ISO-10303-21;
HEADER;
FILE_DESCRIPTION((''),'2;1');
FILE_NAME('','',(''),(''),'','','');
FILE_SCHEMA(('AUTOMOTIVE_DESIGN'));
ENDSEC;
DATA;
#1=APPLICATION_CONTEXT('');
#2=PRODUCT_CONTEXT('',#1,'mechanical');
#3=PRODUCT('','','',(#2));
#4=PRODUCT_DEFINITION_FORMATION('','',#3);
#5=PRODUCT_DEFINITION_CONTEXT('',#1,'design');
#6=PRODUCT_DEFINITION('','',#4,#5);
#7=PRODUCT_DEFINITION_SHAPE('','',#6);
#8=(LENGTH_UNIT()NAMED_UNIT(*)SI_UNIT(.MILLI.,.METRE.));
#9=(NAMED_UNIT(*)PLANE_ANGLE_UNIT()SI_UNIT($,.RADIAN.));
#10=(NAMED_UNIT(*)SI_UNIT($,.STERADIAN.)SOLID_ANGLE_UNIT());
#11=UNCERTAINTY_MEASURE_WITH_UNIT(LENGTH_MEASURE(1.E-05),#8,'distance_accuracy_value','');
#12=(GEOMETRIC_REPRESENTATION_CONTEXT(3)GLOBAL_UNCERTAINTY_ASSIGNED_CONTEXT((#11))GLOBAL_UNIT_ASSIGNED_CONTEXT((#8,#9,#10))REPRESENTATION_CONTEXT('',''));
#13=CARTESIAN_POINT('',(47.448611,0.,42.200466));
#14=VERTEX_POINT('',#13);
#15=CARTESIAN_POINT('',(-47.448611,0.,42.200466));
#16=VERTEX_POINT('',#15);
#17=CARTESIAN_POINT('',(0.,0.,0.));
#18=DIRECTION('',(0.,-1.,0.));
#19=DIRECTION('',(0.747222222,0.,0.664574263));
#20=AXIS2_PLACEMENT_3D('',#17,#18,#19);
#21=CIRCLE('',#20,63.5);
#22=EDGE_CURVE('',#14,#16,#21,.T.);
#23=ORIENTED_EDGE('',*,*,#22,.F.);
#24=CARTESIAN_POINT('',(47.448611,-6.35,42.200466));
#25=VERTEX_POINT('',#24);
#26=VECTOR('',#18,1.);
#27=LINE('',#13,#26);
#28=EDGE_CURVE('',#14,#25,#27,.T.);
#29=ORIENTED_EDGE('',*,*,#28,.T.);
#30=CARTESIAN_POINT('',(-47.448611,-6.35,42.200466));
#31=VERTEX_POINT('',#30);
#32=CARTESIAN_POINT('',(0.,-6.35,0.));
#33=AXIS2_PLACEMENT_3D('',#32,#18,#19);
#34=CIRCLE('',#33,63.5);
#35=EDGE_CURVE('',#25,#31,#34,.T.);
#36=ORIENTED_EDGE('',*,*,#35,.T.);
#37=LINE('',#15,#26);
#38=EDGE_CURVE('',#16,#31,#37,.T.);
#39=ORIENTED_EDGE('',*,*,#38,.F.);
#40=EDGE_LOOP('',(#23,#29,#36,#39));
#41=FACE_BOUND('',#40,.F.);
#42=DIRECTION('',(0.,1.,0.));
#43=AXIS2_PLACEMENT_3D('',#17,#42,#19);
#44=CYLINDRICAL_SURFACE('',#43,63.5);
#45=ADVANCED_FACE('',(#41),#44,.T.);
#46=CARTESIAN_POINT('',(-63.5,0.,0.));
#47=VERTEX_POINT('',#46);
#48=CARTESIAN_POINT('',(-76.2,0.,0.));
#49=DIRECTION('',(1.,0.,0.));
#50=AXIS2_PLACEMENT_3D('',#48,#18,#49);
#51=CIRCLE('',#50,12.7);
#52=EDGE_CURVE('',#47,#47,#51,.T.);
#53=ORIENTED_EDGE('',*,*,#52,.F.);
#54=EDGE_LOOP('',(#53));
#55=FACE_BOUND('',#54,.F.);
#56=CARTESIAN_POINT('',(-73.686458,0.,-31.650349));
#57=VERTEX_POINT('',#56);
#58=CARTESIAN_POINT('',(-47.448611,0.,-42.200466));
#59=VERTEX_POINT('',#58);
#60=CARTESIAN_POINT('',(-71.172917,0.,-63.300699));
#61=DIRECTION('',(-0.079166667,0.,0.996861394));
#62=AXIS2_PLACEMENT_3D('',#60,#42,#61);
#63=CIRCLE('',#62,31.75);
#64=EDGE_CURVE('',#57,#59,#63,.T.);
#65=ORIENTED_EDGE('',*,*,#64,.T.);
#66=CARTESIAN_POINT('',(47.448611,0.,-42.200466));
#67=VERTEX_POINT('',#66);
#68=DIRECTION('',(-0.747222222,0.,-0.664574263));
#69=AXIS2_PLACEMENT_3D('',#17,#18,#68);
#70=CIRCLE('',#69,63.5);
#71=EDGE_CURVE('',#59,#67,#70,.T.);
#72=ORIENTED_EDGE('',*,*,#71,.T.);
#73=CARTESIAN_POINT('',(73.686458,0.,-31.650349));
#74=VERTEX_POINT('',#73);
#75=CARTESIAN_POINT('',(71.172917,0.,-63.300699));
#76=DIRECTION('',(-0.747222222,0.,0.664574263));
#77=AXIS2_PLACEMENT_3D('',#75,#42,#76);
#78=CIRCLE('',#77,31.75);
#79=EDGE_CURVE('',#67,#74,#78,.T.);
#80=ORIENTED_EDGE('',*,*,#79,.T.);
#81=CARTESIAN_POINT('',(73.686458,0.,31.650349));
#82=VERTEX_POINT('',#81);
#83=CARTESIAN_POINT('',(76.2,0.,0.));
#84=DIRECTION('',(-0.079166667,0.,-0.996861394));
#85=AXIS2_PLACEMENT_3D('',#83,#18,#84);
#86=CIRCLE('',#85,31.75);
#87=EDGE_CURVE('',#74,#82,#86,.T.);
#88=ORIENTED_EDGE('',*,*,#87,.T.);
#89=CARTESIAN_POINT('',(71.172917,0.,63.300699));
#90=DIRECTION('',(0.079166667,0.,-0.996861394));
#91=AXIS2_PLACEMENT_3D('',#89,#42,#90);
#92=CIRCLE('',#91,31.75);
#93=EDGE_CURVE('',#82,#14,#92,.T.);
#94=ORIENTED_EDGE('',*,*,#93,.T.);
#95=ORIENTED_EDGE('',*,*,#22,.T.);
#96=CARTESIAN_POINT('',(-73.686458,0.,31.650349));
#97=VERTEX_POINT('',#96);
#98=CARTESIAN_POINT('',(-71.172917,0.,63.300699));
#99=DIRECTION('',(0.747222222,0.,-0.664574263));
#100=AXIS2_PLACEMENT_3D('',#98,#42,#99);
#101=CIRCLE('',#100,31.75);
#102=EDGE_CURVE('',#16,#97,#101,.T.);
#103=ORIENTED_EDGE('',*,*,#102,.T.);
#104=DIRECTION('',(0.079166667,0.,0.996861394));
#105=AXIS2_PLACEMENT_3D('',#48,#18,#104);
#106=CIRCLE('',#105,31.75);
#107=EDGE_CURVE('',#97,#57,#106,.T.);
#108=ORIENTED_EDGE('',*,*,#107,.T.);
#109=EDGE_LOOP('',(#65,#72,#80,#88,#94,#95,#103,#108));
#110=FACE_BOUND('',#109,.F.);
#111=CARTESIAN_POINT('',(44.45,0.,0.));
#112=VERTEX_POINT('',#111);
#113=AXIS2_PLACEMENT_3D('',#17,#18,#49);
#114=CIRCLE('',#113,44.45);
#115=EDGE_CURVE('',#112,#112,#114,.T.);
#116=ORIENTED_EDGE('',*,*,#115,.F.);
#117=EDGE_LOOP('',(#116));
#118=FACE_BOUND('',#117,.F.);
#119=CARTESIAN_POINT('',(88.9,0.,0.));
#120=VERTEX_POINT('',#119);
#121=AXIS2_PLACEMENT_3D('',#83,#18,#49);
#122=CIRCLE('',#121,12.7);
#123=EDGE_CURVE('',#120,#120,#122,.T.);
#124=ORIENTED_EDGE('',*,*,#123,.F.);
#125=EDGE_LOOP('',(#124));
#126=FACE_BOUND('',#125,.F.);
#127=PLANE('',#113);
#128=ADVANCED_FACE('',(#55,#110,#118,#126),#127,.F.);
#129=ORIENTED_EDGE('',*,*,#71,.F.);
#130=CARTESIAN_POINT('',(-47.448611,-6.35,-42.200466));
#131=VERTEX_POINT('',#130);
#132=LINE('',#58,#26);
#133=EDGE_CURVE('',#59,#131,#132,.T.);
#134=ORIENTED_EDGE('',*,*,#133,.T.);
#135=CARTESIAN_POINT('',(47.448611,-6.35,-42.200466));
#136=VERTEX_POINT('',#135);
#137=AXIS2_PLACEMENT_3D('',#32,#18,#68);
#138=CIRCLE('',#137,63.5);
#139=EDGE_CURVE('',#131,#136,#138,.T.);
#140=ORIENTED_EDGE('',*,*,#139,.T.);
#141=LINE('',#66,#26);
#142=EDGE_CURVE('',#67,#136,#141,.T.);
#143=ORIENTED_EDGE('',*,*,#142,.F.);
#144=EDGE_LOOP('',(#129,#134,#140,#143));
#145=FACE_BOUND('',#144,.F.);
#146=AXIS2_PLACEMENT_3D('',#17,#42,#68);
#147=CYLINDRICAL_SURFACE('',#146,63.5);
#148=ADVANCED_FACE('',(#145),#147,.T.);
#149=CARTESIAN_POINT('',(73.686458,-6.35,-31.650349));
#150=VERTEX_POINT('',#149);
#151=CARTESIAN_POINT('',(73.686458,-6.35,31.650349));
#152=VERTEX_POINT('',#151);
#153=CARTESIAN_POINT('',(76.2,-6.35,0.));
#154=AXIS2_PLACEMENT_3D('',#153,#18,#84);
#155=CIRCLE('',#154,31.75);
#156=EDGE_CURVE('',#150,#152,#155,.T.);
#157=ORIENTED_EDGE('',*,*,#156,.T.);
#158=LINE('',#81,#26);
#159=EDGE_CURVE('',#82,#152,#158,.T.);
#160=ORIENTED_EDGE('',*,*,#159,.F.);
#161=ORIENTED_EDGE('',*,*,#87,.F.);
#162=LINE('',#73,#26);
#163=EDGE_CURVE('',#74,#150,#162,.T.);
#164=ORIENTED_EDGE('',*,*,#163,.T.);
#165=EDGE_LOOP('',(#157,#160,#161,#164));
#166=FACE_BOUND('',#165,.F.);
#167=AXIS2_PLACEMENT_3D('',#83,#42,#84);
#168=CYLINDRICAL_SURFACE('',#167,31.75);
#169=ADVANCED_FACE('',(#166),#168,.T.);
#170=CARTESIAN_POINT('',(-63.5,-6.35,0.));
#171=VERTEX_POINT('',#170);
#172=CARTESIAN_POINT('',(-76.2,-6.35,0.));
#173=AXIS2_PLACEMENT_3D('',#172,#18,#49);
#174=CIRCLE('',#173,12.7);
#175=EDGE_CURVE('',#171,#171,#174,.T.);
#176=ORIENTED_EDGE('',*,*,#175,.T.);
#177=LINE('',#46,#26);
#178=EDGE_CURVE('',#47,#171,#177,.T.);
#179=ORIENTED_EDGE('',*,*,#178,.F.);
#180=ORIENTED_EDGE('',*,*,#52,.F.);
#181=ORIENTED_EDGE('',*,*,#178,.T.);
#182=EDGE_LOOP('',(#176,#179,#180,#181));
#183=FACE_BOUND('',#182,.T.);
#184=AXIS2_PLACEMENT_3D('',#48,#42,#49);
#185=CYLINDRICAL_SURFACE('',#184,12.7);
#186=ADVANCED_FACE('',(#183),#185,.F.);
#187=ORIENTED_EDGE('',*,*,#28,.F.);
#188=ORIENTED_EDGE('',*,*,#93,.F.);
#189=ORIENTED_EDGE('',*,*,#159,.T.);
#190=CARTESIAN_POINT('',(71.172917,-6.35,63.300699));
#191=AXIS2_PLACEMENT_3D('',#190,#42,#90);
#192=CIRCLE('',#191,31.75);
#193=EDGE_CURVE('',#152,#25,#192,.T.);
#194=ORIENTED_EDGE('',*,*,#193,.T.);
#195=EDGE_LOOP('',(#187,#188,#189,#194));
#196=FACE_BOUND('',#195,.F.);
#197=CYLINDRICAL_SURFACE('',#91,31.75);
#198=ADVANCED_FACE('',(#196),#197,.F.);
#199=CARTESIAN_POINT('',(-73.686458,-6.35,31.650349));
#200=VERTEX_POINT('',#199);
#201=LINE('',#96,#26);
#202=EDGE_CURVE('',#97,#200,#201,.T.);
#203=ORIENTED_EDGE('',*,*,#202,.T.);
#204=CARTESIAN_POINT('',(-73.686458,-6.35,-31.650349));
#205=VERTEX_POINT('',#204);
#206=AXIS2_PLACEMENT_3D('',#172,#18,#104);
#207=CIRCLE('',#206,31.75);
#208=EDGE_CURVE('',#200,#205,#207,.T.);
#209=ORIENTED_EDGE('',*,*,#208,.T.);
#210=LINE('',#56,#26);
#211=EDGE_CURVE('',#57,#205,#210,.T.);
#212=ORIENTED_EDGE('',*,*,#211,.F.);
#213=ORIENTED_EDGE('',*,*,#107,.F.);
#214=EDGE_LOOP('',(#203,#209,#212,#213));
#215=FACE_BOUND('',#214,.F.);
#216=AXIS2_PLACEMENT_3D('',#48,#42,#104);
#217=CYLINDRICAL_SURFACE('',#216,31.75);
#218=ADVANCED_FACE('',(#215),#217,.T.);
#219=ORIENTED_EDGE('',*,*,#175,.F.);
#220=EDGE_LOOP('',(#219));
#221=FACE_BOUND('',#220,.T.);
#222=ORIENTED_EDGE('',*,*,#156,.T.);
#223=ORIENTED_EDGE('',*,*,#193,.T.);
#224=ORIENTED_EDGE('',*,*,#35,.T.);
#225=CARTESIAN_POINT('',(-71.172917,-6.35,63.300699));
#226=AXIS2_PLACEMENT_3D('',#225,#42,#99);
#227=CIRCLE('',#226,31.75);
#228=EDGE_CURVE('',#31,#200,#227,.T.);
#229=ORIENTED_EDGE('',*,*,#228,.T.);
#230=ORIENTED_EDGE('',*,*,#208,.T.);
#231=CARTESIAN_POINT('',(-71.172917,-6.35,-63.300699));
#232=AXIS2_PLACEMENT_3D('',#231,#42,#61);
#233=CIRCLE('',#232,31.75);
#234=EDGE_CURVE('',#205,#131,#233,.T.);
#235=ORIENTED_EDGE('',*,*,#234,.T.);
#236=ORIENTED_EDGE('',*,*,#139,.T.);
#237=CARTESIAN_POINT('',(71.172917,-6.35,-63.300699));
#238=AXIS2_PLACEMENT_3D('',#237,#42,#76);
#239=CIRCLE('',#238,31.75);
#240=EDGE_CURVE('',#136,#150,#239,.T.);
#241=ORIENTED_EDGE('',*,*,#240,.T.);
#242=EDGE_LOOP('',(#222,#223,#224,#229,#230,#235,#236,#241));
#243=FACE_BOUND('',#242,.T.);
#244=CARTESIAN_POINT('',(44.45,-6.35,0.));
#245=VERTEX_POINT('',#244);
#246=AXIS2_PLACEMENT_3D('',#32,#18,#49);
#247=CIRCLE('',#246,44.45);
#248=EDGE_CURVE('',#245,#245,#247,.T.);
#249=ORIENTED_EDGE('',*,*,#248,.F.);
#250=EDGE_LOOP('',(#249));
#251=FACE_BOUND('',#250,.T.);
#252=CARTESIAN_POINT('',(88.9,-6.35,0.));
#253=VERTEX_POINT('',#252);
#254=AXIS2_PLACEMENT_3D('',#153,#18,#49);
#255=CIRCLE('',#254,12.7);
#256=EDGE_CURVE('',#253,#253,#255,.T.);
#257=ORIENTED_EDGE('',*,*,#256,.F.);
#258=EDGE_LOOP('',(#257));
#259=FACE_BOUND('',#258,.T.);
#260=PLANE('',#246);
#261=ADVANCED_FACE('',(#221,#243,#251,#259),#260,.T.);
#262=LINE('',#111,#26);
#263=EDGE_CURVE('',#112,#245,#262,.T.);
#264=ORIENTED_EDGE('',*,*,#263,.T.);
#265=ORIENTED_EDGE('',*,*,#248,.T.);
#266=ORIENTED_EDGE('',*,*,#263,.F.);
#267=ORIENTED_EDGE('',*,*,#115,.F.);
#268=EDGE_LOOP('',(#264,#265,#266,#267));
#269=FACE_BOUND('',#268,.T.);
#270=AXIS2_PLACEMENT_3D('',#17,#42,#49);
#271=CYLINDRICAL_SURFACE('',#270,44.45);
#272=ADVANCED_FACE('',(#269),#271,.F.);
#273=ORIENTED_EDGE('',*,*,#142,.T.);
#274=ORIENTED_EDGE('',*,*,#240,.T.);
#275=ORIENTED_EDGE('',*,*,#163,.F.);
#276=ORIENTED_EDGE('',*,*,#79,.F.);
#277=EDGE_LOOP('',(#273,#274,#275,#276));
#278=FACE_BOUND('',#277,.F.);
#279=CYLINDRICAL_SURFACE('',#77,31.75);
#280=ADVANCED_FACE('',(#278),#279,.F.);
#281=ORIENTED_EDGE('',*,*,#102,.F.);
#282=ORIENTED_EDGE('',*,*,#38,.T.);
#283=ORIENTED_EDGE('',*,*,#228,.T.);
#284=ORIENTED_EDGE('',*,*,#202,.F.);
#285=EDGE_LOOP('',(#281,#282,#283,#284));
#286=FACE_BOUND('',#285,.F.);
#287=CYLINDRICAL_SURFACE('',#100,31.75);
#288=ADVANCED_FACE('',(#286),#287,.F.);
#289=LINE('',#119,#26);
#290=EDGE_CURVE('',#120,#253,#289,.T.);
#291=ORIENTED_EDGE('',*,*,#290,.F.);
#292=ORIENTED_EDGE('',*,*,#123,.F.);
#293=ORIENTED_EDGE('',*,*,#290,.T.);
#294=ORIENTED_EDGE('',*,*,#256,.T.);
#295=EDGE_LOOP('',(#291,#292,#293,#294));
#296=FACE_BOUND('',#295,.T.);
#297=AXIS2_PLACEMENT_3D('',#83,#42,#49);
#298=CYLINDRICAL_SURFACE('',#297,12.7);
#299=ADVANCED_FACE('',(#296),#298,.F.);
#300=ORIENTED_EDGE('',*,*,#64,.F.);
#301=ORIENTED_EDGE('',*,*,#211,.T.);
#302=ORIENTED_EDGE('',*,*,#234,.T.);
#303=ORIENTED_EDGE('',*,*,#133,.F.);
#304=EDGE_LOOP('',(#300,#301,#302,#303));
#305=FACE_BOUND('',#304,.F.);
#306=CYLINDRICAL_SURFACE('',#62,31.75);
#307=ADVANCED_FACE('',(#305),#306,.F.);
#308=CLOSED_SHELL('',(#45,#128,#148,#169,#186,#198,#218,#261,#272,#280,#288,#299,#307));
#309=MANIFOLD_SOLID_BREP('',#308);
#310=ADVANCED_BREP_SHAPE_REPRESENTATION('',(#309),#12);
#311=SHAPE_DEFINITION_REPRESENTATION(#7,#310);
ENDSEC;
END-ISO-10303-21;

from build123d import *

# Parameters (mm, degrees)
F0_R     = 12.7
F0_R_2   = 44.45
F1_DEPTH = 6.35


# Not quite as in the source:
# - a length typed as a fraction of an inch, garbled in the dataset ("3 / 203.2 mm" for 3/8 in), is restored


with BuildPart() as f1:
    # F0 (on Front) → F1 (new body)
    with BuildSketch(Plane.XZ):
        with BuildLine():
            ThreePointArc((-73.6864583333, -31.6503492602), (-59.3280711503, -33.8428959089), (-47.4486111111, -42.2004656802))
            ThreePointArc((-47.4486111111, -42.2004656802), (0, -63.5), (47.4486111111, -42.2004656802))
            ThreePointArc((47.4486111111, -42.2004656802), (59.3280711503, -33.8428959089), (73.6864583333, -31.6503492602))
            ThreePointArc((73.6864583333, -31.6503492602), (107.95, 0), (73.6864583333, 31.6503492602))
            ThreePointArc((73.6864583333, 31.6503492602), (59.3280711503, 33.8428959089), (47.4486111111, 42.2004656802))
            ThreePointArc((47.4486111111, 42.2004656802), (0, 63.5), (-47.4486111111, 42.2004656802))
            ThreePointArc((-47.4486111111, 42.2004656802), (-59.3280711503, 33.8428959089), (-73.6864583333, 31.6503492602))
            ThreePointArc((-73.6864583333, 31.6503492602), (-107.95, 0), (-73.6864583333, -31.6503492602))
        make_face()
        with Locations((-76.2, 0)):
            Circle(F0_R, mode=Mode.SUBTRACT)
        Circle(F0_R_2, mode=Mode.SUBTRACT)
        with Locations((76.2, 0)):
            Circle(F0_R, mode=Mode.SUBTRACT)
    extrude(amount=F1_DEPTH)


solid = f1.part
